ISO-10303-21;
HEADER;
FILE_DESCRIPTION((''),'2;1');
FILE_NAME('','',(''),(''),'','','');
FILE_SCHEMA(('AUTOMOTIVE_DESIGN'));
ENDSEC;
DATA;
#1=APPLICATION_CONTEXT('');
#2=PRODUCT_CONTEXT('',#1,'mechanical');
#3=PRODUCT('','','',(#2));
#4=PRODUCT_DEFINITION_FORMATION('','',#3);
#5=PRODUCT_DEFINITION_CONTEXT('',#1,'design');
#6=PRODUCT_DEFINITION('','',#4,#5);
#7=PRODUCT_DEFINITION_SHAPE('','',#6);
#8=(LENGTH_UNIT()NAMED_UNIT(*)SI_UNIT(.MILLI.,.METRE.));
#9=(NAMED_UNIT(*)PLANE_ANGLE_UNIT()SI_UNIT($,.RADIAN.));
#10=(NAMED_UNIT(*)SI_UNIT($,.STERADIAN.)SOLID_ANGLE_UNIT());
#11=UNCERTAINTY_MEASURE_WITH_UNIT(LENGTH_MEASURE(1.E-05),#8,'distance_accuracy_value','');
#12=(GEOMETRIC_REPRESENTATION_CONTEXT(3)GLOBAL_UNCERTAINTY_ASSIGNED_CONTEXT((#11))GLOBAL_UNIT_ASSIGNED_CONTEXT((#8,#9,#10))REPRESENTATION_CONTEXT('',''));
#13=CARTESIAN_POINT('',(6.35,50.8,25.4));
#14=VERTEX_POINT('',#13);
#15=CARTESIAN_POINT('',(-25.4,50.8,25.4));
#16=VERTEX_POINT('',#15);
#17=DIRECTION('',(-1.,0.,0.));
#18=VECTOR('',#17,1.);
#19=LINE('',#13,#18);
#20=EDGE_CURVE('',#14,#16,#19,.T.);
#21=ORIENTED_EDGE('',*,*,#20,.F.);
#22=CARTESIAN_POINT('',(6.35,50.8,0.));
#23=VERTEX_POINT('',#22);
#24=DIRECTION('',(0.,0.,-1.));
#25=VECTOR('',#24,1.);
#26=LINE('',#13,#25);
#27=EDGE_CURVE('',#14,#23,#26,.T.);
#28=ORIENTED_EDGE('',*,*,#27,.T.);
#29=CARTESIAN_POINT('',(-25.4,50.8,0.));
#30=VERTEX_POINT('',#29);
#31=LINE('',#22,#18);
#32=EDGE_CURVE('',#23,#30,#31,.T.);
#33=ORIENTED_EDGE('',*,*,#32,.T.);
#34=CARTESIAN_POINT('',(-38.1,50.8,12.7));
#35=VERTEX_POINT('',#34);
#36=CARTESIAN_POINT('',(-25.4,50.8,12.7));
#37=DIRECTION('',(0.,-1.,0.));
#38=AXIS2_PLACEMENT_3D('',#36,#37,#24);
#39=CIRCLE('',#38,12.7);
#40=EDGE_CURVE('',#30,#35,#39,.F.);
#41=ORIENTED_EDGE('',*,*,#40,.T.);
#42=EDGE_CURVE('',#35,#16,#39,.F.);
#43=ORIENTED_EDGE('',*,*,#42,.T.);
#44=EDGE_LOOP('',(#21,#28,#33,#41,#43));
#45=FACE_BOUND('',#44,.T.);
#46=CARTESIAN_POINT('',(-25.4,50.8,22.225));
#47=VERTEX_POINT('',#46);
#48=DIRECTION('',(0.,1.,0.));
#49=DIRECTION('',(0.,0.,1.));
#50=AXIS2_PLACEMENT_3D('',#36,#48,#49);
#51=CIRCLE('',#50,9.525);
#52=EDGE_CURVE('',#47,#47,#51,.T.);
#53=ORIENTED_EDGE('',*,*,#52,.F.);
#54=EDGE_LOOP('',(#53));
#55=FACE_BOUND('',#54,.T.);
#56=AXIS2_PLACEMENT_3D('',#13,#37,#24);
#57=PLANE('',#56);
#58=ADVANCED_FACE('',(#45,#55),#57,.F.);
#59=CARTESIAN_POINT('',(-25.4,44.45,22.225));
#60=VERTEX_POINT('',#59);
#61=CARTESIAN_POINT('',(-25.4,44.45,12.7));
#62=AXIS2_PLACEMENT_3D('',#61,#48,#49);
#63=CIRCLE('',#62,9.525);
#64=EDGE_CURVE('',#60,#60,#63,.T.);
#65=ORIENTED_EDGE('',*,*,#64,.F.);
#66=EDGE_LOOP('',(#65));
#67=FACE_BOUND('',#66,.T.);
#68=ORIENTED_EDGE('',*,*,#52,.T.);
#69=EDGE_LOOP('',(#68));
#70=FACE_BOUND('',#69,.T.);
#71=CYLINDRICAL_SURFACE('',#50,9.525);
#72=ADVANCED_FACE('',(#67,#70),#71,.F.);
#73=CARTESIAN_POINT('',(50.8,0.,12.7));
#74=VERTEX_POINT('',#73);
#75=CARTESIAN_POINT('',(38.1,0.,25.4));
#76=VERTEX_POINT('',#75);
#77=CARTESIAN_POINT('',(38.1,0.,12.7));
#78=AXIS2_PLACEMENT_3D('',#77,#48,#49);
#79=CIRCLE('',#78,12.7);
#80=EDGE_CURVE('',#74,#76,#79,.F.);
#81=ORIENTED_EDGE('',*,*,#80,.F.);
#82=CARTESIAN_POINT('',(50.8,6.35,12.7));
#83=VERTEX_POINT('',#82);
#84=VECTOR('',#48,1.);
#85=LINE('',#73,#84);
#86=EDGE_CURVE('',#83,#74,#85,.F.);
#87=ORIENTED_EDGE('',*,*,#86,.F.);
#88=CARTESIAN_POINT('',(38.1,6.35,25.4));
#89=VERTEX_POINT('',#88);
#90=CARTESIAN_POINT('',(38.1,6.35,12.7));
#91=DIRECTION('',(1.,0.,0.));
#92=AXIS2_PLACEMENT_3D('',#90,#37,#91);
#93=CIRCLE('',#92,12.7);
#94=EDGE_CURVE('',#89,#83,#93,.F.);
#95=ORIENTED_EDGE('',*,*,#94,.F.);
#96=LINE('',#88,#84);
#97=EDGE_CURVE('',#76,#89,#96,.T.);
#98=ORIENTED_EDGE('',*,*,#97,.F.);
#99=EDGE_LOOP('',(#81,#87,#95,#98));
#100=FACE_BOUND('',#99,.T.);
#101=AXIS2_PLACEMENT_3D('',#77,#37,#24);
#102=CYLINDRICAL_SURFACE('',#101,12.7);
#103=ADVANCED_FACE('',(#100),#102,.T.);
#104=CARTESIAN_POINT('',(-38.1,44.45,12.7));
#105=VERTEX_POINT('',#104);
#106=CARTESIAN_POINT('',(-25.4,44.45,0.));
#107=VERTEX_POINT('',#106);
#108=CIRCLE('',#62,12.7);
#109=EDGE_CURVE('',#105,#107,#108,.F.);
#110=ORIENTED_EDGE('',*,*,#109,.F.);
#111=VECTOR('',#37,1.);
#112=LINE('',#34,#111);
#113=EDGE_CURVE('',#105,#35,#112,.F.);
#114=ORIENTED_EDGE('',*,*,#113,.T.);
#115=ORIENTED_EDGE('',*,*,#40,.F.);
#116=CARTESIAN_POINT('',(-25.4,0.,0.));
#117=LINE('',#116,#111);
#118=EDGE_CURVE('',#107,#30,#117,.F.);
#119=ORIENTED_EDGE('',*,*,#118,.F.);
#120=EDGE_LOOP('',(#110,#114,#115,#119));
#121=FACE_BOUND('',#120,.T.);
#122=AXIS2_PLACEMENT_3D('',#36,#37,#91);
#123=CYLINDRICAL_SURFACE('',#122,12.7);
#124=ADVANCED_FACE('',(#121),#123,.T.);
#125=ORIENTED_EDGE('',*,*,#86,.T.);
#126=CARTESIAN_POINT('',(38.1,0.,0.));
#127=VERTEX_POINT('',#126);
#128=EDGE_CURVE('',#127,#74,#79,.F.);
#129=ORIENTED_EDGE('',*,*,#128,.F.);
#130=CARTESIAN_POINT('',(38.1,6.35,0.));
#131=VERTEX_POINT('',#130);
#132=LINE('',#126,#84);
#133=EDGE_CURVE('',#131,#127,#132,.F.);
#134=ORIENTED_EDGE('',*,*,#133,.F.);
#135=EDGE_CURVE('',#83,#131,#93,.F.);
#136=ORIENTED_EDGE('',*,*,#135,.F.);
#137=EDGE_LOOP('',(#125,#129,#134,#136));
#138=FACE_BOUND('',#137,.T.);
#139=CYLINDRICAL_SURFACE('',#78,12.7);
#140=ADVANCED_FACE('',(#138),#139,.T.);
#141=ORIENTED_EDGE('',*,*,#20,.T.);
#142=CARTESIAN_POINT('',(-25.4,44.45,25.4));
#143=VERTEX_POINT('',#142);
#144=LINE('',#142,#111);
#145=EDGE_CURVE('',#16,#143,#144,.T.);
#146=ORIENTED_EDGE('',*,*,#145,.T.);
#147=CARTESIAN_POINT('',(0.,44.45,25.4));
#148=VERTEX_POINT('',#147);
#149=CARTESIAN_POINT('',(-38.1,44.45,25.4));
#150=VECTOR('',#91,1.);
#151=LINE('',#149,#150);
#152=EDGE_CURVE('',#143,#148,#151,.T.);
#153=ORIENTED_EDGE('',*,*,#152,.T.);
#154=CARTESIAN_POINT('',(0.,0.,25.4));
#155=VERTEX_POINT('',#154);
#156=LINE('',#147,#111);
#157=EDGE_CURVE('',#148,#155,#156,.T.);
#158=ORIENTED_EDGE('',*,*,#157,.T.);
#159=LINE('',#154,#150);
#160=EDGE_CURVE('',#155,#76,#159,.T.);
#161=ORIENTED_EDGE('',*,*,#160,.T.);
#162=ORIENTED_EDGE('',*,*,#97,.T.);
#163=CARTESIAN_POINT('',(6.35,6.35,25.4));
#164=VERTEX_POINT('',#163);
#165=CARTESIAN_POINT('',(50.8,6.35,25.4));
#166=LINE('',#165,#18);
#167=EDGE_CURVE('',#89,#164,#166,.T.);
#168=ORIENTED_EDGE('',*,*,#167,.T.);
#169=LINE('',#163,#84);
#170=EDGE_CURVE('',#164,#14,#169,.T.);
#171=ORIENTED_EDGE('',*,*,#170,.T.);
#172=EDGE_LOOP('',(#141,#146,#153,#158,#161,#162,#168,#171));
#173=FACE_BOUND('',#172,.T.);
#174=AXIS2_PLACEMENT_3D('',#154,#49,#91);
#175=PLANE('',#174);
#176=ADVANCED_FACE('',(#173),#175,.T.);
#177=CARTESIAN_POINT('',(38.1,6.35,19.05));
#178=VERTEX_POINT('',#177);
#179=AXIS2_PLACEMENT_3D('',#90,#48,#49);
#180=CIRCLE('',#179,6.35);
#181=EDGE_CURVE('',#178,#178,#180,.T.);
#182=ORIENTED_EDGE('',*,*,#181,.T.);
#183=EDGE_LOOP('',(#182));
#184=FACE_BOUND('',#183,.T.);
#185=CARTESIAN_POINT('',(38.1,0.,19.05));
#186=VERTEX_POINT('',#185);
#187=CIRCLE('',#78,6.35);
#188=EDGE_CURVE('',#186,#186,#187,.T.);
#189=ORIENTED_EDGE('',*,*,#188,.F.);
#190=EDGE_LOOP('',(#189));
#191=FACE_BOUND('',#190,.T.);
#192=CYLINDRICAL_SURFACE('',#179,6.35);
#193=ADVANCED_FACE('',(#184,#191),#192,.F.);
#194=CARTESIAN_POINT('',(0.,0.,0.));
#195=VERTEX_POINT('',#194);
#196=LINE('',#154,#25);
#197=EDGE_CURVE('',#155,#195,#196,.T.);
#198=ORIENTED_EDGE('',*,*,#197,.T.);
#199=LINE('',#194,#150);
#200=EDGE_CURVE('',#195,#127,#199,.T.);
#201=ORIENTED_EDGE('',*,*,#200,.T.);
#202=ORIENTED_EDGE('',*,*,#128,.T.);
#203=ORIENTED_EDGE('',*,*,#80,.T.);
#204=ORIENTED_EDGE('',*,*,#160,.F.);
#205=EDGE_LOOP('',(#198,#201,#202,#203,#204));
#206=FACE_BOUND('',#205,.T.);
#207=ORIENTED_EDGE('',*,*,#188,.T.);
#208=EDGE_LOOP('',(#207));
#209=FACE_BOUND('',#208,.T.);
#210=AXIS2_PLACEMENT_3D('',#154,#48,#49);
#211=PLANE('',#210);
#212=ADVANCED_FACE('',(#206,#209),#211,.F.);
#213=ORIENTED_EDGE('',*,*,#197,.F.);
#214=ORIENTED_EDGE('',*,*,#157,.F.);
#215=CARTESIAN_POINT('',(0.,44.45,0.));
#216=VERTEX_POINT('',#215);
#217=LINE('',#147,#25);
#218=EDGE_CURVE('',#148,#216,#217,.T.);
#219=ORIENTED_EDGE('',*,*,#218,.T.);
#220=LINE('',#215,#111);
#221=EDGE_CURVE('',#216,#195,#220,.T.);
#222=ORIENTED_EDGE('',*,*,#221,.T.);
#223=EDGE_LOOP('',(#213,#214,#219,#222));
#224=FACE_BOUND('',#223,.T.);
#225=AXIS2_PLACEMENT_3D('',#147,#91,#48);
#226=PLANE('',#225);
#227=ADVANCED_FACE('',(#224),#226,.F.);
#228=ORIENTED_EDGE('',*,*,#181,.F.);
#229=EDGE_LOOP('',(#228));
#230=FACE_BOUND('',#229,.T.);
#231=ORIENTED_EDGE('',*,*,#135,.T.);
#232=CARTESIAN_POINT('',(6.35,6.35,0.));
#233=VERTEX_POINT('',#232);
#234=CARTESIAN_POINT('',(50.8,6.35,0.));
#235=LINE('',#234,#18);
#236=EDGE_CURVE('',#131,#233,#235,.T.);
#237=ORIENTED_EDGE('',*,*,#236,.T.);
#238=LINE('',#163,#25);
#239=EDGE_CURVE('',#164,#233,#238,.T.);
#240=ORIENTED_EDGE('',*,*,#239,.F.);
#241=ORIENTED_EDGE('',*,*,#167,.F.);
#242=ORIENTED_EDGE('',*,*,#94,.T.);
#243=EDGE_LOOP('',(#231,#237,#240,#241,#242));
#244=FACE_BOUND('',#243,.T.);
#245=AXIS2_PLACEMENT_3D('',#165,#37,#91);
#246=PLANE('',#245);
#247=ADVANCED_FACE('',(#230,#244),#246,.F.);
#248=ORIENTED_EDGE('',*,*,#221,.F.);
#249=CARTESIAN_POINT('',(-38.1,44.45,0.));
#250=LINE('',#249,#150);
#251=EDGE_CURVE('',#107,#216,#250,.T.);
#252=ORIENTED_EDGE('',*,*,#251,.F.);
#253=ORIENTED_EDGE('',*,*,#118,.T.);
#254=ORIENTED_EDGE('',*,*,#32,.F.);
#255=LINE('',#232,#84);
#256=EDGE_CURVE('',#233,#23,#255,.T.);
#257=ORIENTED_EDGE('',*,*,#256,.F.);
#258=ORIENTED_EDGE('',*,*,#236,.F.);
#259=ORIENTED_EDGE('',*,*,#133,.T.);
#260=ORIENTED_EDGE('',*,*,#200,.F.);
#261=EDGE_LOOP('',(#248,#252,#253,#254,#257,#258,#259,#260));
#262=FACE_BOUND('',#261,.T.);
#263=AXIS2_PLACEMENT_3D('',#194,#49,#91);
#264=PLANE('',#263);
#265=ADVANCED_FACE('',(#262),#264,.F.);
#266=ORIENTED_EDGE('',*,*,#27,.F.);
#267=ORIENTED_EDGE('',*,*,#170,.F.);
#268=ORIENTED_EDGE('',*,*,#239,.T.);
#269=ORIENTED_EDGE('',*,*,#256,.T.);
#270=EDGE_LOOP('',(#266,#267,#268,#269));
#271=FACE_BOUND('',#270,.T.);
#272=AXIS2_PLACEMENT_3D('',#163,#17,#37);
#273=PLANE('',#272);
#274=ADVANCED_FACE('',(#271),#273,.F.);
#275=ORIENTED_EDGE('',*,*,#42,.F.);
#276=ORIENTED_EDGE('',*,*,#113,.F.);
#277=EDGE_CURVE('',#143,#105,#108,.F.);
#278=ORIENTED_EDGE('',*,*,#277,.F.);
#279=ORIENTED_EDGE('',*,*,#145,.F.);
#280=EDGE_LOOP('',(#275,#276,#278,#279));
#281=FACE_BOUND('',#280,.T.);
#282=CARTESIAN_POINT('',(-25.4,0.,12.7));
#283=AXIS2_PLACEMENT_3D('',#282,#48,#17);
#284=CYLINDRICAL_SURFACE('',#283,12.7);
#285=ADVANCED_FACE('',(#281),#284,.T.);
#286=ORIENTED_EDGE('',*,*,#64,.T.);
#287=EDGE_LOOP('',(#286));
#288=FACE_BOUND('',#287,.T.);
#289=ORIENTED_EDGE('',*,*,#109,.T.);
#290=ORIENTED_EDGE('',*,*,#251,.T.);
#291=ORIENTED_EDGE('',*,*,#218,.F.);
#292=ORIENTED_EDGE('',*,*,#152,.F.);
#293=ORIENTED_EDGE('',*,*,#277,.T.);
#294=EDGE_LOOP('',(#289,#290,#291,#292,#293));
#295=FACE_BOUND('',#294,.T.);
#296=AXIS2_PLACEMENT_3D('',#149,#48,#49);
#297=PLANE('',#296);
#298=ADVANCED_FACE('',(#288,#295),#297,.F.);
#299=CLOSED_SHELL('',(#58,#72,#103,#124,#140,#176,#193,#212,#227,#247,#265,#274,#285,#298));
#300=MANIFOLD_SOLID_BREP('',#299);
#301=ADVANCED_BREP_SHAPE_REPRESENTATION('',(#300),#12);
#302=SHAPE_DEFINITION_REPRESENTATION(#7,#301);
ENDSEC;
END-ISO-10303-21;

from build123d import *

# Parameters (mm, degrees)
BOSS_EXTRUDE1_DEPTH         = 25.4
FILLET1_R                   = 12.7
F_3_4_0_75_DIAMETER_HOLE1_D = 19.05
F_1_2_0_5_DIAMETER_HOLE2_D  = 12.7


with BuildPart() as part:
    # Sketch1 → Boss-Extrude1 (new body)
    with BuildSketch(Plane.XY):
        Polygon((-38.1, 44.45), (0, 44.45), (0, 0), (50.8, 0), (50.8, 6.35), (6.35, 6.35), (6.35, 50.8), (-38.1, 50.8), align=None)
    extrude(amount=BOSS_EXTRUDE1_DEPTH)

    # Fillet1
    fillet1_edges = [part.edges().sort_by_distance(p)[0] for p in [
        (50.8, 3.175, 0),
        (-38.1, 47.625, 0),
        (50.8, 3.175, 25.4),
        (-38.1, 47.625, 25.4),
    ]]
    fillet(fillet1_edges, radius=FILLET1_R - 0.0001)  # a hair under: the kernel refuses the full size

    # 3/4 (0.75) Diameter Hole1 (through all)
    with Locations(Plane(origin=(0, 50.8, 0), x_dir=(1, 0, 0), z_dir=(0, 1, 0))):
        with Locations((-25.4, -12.7)):
            Hole(F_3_4_0_75_DIAMETER_HOLE1_D / 2)

    # 1/2 (0.5) Diameter Hole2 (through all)
    with Locations(Plane(origin=(0, 6.35, 0), x_dir=(1, 0, 0), z_dir=(0, 1, 0))):
        with Locations((38.1, -12.7)):
            Hole(F_1_2_0_5_DIAMETER_HOLE2_D / 2)


solid = part.part
